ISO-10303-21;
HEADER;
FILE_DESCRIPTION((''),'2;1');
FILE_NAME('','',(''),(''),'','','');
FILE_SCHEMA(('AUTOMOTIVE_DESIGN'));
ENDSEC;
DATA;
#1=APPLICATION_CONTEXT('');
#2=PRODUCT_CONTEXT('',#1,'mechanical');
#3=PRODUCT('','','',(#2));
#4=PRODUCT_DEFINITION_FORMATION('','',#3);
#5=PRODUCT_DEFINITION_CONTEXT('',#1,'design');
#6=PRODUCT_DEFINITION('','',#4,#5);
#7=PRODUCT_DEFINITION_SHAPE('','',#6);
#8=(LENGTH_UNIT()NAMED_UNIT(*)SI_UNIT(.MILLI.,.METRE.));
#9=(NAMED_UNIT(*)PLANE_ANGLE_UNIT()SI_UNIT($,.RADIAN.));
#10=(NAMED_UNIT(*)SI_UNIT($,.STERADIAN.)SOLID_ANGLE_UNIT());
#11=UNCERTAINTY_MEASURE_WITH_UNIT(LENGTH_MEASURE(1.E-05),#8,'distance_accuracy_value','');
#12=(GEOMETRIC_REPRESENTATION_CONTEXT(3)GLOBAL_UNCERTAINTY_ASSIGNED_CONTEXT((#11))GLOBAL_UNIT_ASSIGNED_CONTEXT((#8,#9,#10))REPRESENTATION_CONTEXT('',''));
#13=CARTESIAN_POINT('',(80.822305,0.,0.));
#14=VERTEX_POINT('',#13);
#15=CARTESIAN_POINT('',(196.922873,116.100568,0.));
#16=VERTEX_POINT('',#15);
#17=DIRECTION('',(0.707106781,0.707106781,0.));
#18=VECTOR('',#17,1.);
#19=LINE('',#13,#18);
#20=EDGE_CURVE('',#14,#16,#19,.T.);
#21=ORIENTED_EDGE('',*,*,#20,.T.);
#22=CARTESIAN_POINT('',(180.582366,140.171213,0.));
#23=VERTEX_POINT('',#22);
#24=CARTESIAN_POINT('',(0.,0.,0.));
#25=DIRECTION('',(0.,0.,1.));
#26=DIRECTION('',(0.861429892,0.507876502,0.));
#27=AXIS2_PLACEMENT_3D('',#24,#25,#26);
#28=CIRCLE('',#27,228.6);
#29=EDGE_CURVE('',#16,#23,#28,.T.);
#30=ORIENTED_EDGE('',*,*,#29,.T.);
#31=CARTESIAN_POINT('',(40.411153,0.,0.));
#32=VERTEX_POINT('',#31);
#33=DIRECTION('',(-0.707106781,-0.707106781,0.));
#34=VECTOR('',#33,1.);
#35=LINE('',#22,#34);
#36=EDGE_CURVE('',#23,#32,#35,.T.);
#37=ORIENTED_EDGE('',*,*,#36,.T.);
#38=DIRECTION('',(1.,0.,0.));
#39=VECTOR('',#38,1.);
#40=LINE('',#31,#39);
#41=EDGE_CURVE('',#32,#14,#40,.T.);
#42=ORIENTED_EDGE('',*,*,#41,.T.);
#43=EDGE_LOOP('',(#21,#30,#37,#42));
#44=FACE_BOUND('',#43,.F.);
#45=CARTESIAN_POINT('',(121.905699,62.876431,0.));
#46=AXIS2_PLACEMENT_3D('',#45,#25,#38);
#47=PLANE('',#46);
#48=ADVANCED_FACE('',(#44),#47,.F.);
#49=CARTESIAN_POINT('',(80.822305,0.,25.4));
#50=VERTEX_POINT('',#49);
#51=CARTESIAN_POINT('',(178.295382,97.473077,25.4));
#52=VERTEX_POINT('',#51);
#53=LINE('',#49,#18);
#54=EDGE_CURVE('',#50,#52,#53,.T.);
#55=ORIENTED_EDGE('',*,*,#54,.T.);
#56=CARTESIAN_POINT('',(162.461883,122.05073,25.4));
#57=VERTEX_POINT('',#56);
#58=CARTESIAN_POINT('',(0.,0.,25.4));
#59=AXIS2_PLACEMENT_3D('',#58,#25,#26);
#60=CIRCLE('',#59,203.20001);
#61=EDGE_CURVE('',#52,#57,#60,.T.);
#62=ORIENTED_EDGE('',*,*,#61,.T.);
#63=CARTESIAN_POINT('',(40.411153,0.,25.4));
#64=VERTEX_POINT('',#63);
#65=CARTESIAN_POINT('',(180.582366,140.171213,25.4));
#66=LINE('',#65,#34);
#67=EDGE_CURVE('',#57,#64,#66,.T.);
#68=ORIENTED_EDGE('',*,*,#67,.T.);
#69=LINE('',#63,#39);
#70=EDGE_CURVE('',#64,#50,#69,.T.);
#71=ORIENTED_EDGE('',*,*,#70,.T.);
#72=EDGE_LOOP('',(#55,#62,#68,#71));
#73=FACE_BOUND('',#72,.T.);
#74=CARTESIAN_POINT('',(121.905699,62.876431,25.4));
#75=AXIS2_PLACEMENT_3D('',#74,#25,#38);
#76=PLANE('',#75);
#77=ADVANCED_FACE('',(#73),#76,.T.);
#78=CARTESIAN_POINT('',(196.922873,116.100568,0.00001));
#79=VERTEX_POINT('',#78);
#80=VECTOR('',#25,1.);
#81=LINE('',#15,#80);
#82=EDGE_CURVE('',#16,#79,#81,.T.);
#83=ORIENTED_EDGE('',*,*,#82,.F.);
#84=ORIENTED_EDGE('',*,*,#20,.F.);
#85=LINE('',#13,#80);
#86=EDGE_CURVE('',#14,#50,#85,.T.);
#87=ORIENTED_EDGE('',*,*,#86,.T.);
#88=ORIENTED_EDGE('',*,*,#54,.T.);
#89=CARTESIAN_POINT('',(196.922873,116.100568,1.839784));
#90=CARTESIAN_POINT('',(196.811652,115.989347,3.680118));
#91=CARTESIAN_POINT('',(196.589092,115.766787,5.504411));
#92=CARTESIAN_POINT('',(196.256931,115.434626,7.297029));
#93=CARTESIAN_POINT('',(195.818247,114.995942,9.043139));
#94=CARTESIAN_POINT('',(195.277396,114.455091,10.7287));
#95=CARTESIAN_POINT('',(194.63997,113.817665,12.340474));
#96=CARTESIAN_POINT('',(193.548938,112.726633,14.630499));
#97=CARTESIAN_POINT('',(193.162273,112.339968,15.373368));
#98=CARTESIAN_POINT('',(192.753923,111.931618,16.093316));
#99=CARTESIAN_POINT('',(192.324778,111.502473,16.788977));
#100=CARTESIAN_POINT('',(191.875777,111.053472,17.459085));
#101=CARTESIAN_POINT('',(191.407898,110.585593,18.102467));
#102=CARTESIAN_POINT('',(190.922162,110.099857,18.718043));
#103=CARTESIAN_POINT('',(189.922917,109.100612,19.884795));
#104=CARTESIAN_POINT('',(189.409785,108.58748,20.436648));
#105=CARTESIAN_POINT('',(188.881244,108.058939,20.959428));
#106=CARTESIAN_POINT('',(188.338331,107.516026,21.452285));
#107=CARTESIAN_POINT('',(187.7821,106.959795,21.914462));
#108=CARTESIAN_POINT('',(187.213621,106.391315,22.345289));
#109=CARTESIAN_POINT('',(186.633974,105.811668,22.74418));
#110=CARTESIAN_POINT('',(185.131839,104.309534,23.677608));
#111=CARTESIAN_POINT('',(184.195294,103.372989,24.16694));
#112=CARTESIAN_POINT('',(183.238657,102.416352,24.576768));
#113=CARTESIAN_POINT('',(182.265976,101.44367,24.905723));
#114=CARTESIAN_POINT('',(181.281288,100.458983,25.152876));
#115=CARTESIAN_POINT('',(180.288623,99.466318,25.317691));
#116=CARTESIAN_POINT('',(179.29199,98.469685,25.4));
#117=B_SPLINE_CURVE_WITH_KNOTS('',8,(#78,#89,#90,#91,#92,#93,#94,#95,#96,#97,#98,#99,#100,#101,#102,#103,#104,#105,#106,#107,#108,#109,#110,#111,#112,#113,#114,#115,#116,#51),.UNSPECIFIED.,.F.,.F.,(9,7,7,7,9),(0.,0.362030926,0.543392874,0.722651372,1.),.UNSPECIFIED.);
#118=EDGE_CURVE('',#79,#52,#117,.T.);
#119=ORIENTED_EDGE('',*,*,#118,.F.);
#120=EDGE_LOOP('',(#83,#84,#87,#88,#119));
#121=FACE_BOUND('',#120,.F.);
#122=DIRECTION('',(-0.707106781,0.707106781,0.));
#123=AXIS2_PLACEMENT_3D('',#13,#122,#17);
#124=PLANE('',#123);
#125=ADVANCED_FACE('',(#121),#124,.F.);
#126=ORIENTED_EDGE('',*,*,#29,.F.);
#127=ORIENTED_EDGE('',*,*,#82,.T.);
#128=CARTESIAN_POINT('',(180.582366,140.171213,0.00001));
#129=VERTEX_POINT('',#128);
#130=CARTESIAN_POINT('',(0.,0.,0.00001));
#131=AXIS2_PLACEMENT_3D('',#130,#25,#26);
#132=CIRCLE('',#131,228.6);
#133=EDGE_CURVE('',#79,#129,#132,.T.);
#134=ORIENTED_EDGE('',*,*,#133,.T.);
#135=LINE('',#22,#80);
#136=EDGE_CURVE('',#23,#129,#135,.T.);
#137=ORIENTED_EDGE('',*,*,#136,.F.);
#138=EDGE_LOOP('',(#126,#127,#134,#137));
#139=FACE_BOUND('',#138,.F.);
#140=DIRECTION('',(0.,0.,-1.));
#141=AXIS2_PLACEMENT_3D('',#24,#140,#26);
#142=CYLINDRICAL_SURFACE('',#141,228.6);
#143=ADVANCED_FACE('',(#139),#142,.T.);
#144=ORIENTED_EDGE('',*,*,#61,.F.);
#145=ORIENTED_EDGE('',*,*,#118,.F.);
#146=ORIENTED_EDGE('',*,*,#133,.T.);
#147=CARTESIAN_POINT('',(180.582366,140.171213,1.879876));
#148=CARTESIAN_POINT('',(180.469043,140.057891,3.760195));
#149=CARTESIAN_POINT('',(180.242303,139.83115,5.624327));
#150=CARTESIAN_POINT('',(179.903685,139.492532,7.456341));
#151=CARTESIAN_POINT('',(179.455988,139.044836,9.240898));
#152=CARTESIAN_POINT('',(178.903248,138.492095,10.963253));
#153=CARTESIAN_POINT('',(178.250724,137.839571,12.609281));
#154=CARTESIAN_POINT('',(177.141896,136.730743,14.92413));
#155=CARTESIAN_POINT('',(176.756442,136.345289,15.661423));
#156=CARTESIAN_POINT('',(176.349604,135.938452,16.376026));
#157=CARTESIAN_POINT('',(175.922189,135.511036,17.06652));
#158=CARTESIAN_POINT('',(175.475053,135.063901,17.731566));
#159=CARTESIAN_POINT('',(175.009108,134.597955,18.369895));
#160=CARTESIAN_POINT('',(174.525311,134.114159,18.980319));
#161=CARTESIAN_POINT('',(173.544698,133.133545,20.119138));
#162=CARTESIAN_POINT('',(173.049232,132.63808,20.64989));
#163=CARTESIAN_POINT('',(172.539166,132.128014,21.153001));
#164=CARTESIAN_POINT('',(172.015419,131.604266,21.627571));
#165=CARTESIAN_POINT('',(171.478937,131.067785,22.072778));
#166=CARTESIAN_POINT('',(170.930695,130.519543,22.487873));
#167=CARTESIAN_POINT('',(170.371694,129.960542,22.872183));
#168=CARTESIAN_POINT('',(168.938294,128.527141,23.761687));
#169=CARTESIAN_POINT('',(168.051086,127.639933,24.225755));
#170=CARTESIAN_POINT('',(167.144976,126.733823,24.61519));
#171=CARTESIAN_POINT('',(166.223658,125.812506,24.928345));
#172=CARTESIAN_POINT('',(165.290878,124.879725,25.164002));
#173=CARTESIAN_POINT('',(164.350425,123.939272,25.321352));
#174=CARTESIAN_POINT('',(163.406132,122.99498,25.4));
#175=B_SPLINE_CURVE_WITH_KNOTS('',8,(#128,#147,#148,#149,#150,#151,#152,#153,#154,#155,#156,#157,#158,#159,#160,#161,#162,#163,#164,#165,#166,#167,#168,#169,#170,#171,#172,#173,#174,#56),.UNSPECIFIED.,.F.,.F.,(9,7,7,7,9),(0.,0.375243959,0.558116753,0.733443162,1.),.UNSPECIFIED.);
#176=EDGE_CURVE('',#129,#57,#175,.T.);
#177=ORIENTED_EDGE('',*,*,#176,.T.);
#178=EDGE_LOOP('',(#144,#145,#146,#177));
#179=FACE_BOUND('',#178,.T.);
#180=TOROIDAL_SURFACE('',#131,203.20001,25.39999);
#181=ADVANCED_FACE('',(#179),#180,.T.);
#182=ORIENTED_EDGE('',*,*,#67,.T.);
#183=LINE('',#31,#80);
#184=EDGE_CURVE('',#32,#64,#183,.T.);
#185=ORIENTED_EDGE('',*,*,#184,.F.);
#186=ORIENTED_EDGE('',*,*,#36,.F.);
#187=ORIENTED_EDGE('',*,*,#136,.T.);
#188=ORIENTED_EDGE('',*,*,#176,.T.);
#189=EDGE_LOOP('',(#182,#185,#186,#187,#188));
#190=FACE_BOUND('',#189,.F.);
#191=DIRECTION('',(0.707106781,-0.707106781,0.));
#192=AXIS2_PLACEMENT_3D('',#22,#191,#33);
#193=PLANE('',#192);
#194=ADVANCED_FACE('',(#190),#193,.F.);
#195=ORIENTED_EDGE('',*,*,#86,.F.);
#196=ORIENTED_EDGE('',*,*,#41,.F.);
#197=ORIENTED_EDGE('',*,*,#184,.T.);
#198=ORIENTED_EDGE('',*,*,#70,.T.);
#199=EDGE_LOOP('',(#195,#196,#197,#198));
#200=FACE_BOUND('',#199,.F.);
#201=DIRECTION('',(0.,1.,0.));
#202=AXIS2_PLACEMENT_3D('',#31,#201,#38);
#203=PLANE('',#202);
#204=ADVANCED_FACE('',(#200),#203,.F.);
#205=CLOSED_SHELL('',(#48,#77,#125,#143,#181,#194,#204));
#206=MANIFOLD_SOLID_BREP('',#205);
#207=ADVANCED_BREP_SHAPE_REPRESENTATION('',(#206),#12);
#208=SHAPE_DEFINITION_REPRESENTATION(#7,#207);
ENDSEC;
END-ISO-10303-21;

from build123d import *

# Parameters (mm, degrees)
F2_DEPTH = 25.4
F3_R     = 25.39999


# Not quite as in the source:
# - a fillet or chamfer is up to 0.001 mm smaller than in the source, because OpenCascade refuses the exact size


with BuildPart() as f2:
    # F1 (on face) → F2 (new body)
    with BuildSketch(Plane.XY):
        with BuildLine():
            Line((180.582366013, 140.1712134682), (40.4111525448, 0))
            Line((40.4111525448, 0), (80.8223050896, 0))
            Line((80.8223050896, 0), (196.9228733519, 116.1005682623))
            ThreePointArc((196.9228733519, 116.1005682623), (189.1359310844, 128.3961041965), (180.582366013, 140.1712134682))
        make_face()
    extrude(amount=F2_DEPTH)

    # F3 (radius 25.4 in the source; OpenCascade refuses exactly that, so slightly less here)
    f3_edges = [f2.edges().sort_by_distance(p)[0] for p in [
        (189.135931, 128.396104, 25.4),
    ]]
    fillet(f3_edges, radius=F3_R)


solid = f2.part
